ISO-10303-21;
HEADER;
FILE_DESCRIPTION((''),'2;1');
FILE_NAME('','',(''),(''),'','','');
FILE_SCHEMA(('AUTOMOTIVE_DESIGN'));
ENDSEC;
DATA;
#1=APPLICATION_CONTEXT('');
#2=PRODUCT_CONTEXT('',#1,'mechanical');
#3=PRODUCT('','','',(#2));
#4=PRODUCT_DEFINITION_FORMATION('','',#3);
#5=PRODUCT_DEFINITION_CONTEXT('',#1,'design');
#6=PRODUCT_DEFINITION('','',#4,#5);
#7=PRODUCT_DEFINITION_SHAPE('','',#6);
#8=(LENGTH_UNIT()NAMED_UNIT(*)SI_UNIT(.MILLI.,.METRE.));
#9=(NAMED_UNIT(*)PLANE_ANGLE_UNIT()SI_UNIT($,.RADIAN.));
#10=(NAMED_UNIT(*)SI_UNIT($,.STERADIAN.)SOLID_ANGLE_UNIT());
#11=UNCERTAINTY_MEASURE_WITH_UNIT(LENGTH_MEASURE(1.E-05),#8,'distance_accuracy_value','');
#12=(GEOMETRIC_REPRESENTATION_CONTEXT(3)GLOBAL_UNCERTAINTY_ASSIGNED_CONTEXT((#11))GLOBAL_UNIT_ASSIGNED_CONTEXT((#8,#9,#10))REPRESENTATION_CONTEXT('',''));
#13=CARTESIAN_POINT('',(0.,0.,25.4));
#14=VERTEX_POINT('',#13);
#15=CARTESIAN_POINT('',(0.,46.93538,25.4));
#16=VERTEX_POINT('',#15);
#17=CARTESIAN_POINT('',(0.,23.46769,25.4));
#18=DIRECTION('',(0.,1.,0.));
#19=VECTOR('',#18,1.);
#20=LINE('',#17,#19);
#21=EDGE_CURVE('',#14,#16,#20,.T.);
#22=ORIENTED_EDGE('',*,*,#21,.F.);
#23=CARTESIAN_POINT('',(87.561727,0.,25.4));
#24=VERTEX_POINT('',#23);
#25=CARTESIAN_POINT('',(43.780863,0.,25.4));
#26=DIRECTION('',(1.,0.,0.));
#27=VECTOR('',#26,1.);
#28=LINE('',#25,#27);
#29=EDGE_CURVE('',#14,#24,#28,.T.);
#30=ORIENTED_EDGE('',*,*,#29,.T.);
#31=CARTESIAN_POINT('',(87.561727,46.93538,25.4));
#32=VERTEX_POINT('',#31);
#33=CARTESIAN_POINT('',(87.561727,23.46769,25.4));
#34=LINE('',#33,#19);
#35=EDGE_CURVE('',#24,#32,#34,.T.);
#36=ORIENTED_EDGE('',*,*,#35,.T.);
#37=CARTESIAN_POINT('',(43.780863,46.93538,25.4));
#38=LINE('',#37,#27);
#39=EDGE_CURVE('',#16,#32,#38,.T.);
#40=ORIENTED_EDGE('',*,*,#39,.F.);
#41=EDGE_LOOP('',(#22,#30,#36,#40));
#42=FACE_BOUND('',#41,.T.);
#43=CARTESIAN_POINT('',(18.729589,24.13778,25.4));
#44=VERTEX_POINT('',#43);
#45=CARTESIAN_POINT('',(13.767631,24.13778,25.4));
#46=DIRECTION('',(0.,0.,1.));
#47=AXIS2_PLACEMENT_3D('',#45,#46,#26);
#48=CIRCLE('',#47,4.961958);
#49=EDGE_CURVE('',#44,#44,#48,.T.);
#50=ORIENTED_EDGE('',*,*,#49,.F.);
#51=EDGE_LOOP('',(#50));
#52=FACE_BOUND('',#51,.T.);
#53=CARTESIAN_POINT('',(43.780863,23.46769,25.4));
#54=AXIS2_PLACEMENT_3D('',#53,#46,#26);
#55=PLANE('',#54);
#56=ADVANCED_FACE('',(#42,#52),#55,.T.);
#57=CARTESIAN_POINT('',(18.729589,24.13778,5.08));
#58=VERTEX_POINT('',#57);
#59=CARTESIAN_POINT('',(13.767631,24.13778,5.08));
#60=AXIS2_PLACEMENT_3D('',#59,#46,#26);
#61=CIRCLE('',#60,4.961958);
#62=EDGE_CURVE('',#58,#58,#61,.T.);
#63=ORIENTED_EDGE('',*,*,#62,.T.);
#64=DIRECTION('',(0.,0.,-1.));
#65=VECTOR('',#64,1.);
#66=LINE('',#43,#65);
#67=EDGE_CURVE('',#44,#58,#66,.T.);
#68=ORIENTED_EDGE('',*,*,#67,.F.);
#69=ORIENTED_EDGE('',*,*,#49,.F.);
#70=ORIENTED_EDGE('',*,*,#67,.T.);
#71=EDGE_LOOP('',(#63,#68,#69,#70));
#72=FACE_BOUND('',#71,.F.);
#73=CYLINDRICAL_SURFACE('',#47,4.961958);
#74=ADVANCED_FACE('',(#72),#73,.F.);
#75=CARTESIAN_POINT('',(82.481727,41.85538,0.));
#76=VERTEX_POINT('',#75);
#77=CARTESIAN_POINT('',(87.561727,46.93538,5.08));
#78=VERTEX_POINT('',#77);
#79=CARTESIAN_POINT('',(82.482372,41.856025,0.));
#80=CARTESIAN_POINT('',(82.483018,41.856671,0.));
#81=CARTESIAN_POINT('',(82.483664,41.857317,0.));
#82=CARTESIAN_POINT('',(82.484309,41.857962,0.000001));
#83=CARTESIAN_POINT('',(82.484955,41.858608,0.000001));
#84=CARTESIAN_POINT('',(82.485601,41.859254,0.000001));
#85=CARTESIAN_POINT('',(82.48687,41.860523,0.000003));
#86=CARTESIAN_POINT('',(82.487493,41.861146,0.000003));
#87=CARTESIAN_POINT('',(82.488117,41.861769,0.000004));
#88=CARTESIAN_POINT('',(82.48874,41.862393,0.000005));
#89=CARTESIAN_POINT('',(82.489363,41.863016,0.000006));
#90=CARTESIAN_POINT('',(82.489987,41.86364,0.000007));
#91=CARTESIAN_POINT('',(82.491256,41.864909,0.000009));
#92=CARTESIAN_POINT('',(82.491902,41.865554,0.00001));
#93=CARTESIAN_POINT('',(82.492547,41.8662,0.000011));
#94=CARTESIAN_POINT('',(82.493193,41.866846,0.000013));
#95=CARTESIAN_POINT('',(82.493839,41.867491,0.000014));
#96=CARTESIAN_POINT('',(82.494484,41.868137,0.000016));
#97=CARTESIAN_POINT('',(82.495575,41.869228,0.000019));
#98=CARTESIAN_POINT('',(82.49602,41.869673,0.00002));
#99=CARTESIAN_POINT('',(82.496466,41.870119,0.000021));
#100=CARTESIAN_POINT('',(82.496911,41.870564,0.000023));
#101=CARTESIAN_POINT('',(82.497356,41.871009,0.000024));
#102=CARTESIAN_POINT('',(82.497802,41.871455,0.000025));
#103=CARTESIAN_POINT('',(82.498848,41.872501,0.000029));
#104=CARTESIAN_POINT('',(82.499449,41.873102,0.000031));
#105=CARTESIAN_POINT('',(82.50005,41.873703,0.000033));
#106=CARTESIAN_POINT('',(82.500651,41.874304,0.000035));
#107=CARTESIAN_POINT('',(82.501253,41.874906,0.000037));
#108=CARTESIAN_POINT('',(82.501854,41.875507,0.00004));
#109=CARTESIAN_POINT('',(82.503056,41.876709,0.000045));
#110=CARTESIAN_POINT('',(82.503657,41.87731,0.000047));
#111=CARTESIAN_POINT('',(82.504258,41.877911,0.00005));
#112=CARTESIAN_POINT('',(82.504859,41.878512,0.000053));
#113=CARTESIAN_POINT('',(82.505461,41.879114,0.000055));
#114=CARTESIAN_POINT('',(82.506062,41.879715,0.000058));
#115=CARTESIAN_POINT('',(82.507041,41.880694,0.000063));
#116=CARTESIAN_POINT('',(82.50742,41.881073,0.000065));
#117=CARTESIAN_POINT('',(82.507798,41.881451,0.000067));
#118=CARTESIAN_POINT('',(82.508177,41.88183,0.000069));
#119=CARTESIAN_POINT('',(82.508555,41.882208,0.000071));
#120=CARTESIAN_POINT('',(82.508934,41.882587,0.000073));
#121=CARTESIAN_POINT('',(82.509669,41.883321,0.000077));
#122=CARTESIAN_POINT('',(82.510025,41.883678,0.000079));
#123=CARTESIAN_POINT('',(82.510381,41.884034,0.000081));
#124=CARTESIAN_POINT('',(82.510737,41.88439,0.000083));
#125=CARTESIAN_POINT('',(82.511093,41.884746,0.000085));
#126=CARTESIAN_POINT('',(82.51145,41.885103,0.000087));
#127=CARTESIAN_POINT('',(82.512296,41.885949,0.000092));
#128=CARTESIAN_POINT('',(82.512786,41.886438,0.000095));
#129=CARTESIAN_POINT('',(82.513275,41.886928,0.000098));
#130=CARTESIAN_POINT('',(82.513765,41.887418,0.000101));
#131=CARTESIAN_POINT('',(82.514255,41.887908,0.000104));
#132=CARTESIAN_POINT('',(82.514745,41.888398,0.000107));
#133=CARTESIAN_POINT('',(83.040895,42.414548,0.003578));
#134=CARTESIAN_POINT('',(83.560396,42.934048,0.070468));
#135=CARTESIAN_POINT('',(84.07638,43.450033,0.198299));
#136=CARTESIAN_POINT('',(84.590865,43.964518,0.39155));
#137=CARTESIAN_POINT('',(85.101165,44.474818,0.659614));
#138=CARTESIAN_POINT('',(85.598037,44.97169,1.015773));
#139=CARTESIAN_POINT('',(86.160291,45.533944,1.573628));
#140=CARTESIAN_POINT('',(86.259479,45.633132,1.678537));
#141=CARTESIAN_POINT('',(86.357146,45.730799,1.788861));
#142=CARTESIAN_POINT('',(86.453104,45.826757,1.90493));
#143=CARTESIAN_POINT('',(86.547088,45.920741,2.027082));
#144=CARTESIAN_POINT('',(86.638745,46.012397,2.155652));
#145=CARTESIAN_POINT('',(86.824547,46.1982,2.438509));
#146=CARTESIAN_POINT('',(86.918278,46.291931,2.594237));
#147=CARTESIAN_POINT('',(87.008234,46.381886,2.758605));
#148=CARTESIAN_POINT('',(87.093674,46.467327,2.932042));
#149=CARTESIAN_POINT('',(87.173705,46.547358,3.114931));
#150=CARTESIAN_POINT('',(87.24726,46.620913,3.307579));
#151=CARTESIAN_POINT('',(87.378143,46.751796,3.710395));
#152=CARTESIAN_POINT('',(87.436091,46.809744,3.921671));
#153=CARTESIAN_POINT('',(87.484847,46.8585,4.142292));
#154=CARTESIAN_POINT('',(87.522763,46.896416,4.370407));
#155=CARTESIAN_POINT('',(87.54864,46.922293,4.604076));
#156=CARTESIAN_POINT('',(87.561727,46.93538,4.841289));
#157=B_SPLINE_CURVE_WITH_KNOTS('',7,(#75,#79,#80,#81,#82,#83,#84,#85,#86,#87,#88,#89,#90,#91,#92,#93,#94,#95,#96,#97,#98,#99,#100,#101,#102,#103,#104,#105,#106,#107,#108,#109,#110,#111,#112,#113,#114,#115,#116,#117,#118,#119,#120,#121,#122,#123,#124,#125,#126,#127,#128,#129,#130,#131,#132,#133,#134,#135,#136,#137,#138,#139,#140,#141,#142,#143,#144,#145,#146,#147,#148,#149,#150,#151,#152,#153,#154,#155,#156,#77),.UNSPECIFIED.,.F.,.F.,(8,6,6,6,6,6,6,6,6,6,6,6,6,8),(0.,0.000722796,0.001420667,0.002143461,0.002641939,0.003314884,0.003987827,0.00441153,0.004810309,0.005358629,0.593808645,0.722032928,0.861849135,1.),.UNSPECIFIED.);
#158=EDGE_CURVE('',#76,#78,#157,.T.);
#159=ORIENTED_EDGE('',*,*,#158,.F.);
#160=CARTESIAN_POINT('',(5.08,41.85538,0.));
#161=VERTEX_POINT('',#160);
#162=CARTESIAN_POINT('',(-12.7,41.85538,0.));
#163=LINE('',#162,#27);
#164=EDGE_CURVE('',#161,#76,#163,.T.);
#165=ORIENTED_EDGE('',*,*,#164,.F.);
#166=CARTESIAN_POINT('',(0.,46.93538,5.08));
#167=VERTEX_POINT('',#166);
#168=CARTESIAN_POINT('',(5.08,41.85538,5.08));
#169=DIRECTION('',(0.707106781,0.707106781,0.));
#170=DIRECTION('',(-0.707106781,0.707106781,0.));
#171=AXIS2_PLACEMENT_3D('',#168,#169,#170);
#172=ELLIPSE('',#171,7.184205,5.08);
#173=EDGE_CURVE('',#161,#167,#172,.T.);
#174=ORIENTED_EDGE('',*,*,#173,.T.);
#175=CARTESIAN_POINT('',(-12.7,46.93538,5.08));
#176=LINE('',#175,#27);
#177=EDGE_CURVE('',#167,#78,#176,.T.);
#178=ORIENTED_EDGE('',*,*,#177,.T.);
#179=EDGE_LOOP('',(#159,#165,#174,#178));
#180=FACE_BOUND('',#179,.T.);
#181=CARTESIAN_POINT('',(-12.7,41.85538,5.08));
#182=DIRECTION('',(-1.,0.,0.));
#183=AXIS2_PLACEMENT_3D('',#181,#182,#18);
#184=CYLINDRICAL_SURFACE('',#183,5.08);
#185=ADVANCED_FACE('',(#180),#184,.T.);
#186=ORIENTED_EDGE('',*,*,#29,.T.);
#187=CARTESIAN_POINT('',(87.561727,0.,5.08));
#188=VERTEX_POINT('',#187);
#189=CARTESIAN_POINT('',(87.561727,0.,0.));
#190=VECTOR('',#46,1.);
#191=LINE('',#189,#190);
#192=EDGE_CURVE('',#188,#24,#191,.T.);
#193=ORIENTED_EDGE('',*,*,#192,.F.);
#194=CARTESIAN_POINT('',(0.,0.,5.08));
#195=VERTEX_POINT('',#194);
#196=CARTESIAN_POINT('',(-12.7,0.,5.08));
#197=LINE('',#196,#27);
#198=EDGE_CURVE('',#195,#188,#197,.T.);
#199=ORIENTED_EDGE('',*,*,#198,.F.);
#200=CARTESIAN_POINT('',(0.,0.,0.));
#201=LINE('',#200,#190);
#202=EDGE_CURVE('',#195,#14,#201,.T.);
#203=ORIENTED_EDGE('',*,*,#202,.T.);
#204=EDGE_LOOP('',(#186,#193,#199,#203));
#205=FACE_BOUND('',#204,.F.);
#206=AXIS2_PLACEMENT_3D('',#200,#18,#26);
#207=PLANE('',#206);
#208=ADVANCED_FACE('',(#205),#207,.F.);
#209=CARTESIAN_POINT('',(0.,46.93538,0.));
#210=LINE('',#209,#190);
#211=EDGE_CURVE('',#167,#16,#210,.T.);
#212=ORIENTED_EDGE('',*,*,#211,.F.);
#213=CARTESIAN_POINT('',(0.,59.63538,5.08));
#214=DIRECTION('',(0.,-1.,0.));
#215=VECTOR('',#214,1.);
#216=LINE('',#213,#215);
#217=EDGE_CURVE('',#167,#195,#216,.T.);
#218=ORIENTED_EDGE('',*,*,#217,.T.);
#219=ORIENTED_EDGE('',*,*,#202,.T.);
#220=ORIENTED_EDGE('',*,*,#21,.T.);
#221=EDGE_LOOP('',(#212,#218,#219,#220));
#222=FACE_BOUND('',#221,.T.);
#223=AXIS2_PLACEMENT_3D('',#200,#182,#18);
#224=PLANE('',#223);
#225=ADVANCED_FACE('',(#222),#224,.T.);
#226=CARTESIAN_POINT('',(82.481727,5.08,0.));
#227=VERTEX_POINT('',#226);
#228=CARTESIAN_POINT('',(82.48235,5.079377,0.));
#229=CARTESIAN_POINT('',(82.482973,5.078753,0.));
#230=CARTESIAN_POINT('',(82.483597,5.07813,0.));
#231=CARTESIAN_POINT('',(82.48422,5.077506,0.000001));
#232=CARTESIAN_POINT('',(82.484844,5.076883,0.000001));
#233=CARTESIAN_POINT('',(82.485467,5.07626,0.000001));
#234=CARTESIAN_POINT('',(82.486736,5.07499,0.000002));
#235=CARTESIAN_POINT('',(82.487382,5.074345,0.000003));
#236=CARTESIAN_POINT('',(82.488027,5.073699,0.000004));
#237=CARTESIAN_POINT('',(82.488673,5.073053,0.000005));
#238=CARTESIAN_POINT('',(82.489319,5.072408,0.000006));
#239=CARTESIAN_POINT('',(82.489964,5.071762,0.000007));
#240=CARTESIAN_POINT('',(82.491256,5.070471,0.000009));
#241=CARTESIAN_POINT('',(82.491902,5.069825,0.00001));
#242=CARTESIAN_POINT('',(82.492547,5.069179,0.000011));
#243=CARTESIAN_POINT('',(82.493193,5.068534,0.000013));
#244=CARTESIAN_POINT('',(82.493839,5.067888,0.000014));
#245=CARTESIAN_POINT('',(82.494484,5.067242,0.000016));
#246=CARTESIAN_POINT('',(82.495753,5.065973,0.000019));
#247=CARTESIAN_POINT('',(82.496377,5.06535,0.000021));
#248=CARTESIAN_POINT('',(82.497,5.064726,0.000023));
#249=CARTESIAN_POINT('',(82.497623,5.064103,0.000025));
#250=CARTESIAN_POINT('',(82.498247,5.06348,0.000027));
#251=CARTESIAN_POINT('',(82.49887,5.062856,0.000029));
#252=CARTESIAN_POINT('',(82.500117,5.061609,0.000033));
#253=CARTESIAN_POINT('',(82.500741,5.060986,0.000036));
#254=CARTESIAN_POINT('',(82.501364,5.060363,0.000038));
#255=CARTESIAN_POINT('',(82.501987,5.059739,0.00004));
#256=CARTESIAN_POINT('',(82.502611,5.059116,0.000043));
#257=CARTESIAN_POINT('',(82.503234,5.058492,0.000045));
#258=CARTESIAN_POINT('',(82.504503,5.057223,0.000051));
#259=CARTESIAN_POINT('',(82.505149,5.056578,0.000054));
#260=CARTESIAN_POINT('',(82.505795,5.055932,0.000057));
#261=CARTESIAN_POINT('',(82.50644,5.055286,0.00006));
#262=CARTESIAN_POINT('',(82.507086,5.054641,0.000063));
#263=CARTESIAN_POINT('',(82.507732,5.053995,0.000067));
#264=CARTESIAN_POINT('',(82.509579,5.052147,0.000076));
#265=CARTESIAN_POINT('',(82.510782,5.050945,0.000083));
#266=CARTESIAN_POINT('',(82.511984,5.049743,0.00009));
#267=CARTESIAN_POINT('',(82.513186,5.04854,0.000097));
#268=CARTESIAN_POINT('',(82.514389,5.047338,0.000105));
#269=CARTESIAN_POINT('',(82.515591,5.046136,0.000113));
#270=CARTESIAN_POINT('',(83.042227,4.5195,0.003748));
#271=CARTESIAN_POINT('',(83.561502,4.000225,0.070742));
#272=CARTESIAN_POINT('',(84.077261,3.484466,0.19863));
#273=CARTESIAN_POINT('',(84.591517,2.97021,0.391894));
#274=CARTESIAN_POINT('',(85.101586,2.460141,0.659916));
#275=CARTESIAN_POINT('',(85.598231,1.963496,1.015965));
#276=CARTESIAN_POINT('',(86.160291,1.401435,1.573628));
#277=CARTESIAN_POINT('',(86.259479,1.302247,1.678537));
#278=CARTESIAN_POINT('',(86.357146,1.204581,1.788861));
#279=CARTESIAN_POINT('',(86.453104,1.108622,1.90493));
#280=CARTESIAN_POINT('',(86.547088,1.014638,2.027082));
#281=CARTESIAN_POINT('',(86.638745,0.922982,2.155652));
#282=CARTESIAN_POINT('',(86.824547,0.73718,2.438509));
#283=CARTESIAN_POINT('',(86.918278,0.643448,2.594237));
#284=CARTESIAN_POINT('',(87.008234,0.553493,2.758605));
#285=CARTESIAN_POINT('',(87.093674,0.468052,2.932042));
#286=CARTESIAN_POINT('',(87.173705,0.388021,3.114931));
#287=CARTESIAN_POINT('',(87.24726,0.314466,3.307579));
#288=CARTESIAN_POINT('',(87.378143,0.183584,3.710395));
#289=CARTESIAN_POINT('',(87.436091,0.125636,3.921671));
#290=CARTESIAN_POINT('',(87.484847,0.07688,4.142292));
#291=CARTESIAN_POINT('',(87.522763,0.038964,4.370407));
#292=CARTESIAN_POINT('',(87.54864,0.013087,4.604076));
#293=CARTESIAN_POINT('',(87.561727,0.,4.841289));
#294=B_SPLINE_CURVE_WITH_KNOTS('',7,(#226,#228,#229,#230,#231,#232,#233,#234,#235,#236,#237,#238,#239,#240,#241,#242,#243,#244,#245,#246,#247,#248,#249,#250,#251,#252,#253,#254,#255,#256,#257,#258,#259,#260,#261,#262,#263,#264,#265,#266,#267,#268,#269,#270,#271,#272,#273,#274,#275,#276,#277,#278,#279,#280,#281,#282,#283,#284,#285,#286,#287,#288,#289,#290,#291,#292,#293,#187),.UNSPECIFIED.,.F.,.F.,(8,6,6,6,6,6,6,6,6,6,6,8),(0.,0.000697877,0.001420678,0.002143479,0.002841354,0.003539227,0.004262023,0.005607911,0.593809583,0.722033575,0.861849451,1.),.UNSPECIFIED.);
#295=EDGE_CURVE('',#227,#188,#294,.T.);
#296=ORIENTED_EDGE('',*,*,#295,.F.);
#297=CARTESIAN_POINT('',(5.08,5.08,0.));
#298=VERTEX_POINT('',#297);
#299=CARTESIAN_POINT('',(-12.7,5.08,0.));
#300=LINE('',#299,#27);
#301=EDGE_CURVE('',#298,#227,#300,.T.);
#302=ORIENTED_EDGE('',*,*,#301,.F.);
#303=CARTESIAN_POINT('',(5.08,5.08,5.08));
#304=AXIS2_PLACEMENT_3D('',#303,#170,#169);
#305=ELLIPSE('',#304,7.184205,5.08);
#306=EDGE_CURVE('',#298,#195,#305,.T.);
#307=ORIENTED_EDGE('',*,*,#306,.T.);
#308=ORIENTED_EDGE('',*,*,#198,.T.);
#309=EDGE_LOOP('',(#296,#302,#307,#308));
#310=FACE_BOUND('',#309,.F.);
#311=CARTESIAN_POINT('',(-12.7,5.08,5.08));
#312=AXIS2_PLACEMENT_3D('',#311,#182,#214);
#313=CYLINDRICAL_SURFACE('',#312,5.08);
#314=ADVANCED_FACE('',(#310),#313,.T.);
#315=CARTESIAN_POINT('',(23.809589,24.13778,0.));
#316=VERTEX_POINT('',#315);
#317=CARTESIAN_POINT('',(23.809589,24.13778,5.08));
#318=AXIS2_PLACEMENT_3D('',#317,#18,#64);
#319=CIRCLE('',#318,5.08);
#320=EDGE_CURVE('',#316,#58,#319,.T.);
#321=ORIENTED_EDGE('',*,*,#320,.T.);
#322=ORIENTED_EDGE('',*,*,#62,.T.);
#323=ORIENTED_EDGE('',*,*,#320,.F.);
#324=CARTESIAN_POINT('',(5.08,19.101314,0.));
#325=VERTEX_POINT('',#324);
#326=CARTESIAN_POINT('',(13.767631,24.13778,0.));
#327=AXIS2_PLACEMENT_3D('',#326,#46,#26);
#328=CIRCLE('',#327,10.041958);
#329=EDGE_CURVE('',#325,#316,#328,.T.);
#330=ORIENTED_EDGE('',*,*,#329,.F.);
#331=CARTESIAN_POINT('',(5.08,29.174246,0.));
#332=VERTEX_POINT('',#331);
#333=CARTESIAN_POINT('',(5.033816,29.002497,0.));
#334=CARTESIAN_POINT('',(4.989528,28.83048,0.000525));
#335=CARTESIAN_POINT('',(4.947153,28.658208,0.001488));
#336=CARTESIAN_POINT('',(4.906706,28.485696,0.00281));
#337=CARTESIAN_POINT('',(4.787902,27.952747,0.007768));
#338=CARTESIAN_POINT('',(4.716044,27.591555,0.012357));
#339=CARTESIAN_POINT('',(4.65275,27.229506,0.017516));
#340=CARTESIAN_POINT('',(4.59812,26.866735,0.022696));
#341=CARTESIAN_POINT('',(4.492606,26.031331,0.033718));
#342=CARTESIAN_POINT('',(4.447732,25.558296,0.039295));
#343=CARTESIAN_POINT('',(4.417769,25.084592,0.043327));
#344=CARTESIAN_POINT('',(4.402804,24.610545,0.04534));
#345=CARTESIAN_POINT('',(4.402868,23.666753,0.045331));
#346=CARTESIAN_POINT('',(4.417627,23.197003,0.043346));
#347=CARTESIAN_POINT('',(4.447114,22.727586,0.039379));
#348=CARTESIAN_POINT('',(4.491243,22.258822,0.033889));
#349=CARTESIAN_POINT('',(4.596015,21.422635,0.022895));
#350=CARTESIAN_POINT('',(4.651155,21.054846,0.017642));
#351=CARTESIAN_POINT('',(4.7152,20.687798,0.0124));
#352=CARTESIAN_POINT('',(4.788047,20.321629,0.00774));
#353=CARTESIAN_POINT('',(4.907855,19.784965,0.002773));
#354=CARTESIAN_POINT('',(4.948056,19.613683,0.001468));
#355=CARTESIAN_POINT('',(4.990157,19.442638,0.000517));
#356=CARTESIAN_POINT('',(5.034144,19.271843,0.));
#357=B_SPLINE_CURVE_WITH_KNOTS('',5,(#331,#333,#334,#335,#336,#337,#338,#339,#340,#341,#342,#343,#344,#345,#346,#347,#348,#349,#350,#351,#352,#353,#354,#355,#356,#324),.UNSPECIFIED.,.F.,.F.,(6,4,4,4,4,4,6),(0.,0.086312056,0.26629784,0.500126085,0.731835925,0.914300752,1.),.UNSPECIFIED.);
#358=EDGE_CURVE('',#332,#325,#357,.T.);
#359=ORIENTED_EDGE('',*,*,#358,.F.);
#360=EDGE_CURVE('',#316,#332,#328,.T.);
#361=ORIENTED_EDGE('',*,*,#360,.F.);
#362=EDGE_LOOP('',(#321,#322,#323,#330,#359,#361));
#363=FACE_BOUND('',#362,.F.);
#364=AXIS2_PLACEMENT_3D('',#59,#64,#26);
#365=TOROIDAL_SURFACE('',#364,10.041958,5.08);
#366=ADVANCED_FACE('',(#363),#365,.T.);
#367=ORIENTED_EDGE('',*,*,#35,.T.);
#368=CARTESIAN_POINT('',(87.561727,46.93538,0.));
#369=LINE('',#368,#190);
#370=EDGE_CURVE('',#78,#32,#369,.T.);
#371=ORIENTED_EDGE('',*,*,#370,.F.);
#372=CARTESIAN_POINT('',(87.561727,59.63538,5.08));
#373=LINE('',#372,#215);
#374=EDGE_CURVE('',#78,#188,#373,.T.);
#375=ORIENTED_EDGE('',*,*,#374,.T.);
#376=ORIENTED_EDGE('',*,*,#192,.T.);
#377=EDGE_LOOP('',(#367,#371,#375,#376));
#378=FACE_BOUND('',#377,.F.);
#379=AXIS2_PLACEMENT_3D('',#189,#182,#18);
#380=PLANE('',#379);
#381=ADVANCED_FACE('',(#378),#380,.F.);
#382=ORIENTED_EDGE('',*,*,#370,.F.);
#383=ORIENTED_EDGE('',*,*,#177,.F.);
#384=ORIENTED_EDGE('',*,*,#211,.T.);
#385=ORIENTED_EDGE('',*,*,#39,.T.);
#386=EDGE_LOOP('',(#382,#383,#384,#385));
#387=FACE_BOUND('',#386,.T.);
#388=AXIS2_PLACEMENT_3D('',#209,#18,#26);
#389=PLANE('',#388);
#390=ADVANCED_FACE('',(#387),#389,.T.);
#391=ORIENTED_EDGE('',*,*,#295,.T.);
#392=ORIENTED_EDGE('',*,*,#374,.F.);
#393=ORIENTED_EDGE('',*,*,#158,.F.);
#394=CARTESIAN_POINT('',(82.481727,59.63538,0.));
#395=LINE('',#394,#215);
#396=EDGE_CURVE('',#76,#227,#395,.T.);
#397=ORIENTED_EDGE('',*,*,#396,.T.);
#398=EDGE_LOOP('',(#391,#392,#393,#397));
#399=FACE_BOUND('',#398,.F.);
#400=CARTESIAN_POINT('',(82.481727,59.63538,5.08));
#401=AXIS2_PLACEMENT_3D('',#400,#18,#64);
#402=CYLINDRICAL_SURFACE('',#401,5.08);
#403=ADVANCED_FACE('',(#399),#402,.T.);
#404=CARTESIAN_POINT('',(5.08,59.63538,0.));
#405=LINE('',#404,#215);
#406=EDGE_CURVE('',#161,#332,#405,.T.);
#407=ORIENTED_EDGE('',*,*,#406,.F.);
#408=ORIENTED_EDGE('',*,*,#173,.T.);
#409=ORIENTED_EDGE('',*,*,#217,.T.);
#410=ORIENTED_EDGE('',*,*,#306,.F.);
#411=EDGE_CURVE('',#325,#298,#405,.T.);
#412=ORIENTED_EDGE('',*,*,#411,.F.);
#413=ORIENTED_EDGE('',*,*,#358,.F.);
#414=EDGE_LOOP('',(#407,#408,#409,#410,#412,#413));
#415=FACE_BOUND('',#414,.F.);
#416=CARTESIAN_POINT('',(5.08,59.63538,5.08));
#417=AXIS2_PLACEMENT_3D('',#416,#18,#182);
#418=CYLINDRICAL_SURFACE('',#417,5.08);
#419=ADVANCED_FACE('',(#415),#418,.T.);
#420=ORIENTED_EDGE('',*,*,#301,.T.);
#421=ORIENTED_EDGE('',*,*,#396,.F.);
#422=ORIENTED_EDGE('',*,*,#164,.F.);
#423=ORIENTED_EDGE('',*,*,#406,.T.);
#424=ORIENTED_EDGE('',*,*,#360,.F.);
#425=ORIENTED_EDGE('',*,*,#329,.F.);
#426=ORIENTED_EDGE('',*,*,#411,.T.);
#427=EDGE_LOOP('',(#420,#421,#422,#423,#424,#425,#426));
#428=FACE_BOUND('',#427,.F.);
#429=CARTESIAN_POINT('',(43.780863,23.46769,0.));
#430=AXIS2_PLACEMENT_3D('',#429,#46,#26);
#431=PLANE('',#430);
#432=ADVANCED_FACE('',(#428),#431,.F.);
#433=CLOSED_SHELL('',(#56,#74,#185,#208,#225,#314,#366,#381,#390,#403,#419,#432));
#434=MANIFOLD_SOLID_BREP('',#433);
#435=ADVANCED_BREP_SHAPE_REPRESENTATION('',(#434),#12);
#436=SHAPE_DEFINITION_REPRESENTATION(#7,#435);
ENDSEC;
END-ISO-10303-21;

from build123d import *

# Parameters (mm, degrees)
F0_W        = 87.5617265701
F0_H        = 46.9353795052
F1_DEPTH    = 25.4
F2_R        = 4.9619580549
F3_DEPTH    = 25.4
F4_T1_DEPTH = 72.3353795052
F4_T3_DEPTH = 112.9617265701


# Not quite as in the source:
# - a fillet or chamfer that OpenCascade refuses, or shapes differently, is made with other operations: its cross-section is extruded or revolved along the edge and cut away or added


with BuildPart() as f1:
    # F0 (on Top) → F1 (new body)
    with BuildSketch(Plane.XY):
        with Locations((43.7808632851, 23.4676897526)):
            Rectangle(F0_W, F0_H)
    extrude(amount=F1_DEPTH)

    # F2 (on face) → F3 (cut)
    with BuildSketch(Plane.XY.offset(25.4)):
        with Locations((13.7676307932, 24.1377800703)):
            Circle(F2_R)
    extrude(amount=-F3_DEPTH, mode=Mode.SUBTRACT)

    # F4: fillet of radius 5.08 on 5 edges, made by hand

    # F4_s2 → F4_t1 (cut)
    with BuildSketch(Plane.XZ.offset(-59.6353795052)):
        with BuildLine():
            ThreePointArc((0, 5.08), (1.4878975516, 1.4878975516), (5.08, 0))
            Line((5.08, 0), (0, 0))
            Line((0, 0), (0, 5.08))
        make_face()
        with BuildLine():
            ThreePointArc((82.4817265701, 0), (86.0738290186, 1.4878975516), (87.5617265701, 5.08))
            Line((87.5617265701, 5.08), (87.5617265701, 0))
            Line((87.5617265701, 0), (82.4817265701, 0))
        make_face()
    extrude(amount=F4_T1_DEPTH, mode=Mode.SUBTRACT)

    # F4_s4 → F4_t3 (cut)
    with BuildSketch(Plane.YZ.offset(-12.7)):
        with BuildLine():
            ThreePointArc((46.9353795052, 5.08), (45.4474819536, 1.4878975516), (41.8553795052, 0))
            Line((41.8553795052, 0), (46.9353795052, 0))
            Line((46.9353795052, 0), (46.9353795052, 5.08))
        make_face()
        with BuildLine():
            ThreePointArc((0, 5.08), (1.4878975516, 1.4878975516), (5.08, 0))
            Line((5.08, 0), (0, 0))
            Line((0, 0), (0, 5.08))
        make_face()
    extrude(amount=F4_T3_DEPTH, mode=Mode.SUBTRACT)

    # F4_s5 → F4_t6 (revolve, cut)
    with BuildSketch(Plane.XZ.offset(-24.1377800703)):
        with BuildLine():
            ThreePointArc((23.809588848, 0), (20.2174863996, 1.4878975516), (18.729588848, 5.08))
            Line((18.729588848, 5.08), (18.729588848, 0))
            Line((18.729588848, 0), (23.809588848, 0))
        make_face()
    revolve(axis=Axis((13.7676307932, 24.1377800703, 0), (0, 0, 1)), mode=Mode.SUBTRACT)


solid = f1.part
